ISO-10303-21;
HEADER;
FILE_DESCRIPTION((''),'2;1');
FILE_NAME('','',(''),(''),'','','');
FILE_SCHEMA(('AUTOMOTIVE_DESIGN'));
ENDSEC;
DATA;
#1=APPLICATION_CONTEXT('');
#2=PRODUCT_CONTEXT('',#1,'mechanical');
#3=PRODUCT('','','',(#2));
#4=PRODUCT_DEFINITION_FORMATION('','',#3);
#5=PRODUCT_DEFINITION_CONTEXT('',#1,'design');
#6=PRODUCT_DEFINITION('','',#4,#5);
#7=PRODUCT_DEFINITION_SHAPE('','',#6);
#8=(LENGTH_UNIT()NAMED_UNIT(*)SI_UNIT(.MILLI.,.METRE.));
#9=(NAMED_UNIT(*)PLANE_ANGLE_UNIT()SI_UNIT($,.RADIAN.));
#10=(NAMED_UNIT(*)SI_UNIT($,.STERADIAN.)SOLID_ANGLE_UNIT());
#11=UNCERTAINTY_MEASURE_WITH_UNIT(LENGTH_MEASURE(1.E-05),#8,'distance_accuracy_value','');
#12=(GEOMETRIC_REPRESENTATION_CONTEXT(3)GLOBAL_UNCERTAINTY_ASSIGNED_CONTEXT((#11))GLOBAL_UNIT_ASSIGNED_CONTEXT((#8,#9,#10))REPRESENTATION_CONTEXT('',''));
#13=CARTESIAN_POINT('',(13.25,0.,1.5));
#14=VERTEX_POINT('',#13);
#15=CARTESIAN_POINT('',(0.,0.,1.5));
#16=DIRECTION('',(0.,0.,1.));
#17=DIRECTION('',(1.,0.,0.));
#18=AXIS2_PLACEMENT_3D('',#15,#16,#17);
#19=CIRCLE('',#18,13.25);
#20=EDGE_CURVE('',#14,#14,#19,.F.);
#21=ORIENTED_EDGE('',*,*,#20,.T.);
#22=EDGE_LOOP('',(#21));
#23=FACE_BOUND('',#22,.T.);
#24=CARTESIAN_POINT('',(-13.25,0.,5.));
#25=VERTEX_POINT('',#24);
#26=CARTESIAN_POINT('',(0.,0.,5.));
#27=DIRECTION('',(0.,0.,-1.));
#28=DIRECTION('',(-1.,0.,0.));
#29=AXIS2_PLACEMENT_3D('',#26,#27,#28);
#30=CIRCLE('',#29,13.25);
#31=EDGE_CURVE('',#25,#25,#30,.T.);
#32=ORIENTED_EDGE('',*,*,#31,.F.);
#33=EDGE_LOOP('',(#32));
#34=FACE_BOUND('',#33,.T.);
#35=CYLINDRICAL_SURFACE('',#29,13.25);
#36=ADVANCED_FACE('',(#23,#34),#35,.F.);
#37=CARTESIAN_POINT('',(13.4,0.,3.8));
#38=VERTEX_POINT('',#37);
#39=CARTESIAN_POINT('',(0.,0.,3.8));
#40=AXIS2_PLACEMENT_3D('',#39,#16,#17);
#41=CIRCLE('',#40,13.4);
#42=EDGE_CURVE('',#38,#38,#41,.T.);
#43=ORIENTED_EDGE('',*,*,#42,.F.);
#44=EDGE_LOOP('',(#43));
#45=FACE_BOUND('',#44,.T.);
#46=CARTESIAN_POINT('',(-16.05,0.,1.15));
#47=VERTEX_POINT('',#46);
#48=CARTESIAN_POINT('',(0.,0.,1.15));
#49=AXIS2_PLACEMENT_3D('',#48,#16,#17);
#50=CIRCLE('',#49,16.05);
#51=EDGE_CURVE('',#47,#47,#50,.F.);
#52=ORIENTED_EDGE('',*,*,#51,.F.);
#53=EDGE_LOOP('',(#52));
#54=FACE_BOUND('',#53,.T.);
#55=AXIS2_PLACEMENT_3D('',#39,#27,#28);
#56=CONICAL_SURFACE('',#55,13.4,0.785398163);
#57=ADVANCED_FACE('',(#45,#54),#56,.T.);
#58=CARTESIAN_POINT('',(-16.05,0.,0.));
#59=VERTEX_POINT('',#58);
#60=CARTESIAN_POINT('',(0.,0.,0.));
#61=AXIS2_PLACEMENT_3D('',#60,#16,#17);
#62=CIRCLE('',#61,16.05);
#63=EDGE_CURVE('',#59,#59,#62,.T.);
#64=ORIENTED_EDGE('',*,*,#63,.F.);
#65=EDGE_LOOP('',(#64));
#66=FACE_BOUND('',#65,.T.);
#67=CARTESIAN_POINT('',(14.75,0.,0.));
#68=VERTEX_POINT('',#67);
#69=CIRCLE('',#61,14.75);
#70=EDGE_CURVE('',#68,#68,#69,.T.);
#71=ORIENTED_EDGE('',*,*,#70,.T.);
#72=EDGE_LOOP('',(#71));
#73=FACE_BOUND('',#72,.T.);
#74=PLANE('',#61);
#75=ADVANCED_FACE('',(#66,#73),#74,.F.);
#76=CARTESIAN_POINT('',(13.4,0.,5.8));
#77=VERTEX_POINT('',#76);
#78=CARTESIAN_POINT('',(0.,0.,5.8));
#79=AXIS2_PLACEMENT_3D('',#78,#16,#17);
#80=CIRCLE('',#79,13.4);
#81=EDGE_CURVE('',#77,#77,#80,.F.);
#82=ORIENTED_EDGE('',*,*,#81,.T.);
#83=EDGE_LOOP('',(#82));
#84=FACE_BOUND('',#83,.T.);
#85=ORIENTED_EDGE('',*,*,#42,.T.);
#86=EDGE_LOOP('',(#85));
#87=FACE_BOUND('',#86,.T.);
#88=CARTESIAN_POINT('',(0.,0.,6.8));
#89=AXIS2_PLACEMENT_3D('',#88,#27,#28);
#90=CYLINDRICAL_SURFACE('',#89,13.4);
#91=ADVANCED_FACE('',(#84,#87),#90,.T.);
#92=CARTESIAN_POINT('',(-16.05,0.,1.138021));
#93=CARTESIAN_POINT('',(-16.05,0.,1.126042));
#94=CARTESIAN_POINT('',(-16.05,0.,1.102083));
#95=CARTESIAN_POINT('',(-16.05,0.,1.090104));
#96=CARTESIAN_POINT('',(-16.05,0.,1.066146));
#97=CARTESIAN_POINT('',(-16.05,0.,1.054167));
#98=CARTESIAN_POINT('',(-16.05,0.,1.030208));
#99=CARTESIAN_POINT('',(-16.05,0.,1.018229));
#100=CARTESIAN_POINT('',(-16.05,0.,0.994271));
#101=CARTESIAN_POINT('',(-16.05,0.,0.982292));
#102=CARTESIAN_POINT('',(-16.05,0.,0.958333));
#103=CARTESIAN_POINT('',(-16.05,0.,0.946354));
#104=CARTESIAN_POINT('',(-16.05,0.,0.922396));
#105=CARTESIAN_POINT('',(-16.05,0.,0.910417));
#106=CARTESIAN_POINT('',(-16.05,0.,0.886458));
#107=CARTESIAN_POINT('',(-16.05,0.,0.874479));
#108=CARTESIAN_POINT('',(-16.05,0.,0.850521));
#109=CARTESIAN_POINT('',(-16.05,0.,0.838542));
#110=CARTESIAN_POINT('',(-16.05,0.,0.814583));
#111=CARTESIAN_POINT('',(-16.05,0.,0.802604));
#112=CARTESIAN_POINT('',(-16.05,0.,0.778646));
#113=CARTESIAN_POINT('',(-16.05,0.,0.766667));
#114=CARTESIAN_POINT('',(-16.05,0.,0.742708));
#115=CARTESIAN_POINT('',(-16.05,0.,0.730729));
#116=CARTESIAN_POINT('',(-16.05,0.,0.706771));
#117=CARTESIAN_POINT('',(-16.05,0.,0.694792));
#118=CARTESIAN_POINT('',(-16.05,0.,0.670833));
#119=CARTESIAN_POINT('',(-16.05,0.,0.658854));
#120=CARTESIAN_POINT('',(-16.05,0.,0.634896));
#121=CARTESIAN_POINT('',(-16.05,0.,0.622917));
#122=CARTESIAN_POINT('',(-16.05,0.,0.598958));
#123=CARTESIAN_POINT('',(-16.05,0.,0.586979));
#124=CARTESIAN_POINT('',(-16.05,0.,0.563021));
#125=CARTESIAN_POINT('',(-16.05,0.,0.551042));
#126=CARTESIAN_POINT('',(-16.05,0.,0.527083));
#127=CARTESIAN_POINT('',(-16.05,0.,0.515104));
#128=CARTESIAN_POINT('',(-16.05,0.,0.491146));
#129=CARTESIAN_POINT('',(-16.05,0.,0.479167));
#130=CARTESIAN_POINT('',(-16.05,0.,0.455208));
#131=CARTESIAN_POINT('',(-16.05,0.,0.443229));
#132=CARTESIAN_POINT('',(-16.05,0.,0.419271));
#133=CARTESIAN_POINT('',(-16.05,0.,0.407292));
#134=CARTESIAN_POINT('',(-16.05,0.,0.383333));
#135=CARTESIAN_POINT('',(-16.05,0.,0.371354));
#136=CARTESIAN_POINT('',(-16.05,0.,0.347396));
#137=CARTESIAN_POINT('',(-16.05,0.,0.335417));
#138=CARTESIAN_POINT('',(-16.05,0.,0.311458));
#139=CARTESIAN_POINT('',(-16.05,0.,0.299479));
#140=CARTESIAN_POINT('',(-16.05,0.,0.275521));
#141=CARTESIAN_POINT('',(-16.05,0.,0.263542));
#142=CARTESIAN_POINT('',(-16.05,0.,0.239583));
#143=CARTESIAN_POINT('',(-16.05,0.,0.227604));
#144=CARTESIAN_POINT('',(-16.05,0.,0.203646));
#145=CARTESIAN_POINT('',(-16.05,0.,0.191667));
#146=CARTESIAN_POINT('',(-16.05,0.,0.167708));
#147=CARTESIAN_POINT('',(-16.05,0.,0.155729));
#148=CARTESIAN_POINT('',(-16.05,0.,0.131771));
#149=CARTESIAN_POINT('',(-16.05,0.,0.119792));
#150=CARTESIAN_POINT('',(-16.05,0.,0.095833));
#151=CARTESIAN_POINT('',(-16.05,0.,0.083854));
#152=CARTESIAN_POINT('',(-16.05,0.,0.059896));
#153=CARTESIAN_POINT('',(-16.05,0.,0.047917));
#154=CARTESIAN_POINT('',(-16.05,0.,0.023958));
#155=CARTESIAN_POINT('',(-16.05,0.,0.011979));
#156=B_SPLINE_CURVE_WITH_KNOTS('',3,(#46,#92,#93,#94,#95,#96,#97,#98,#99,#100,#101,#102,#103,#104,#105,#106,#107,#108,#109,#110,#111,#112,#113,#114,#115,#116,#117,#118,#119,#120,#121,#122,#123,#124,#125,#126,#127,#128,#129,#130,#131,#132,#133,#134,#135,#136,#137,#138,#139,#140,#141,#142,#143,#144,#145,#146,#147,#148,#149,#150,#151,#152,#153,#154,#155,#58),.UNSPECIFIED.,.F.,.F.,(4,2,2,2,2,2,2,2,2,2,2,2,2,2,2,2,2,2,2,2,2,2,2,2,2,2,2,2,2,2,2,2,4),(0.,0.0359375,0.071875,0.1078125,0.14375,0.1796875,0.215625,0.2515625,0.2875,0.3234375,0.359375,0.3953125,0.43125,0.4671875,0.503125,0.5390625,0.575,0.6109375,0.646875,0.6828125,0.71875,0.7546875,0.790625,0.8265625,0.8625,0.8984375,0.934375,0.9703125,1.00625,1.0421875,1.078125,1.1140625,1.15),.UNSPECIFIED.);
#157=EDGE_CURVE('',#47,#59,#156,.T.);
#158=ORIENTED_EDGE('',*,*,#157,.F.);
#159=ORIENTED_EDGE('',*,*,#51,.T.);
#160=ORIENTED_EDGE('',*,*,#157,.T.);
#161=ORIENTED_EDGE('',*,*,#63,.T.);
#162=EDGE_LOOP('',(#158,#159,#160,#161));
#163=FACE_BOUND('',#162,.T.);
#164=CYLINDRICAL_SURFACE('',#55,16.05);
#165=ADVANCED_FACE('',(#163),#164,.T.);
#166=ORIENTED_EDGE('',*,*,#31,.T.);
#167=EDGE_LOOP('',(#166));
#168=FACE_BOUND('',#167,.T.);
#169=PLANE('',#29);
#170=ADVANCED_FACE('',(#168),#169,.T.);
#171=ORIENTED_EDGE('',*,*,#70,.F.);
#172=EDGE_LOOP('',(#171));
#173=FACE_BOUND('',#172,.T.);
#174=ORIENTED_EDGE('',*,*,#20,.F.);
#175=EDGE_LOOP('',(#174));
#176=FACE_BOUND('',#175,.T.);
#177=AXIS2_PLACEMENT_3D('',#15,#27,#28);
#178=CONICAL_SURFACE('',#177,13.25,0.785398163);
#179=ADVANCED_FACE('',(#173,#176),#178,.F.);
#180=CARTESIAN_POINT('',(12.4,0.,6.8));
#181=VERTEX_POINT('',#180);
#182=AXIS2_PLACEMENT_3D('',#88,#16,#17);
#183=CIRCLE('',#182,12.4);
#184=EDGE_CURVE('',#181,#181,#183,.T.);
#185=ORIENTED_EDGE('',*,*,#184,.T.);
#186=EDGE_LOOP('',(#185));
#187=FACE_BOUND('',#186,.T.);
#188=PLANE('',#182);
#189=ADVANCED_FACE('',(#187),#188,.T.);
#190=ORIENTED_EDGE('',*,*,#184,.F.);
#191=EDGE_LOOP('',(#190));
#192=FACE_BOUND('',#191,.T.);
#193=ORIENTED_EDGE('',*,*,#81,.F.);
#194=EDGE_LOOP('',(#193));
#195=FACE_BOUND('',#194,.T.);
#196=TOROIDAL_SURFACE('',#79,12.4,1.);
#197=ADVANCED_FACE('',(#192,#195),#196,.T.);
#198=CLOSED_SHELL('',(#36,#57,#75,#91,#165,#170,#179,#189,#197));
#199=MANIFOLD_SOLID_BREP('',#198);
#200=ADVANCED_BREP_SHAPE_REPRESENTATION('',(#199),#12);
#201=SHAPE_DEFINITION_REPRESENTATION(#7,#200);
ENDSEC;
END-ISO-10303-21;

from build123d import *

# Parameters (mm, degrees)
SCHIZZO1_R                   = 16.05
ESTRUSIONE_ESTRUSIONE1_DEPTH = 3.8
SCHIZZO2_R                   = 13.4
ESTRUSIONE_ESTRUSIONE2_DEPTH = 3
SMUSSO1_SIZE                 = 2.65
RACCORDO1_R                  = 1
SCHIZZO3_R                   = 13.25
TAGLIO_ESTRUSIONE1_DEPTH     = 5
SMUSSO2_SIZE                 = 1.5


with BuildPart() as part:
    # Schizzo1 → Estrusione-Estrusione1 (new body)
    with BuildSketch(Plane.XY):
        with Locations(Location((0, 0, 0), (0, 0, 180))):
            Circle(SCHIZZO1_R)
    extrude(amount=ESTRUSIONE_ESTRUSIONE1_DEPTH)

    # Schizzo2 → Estrusione-Estrusione2 (add)
    with BuildSketch(Plane.XY.offset(3.8)):
        Circle(SCHIZZO2_R)
    extrude(amount=ESTRUSIONE_ESTRUSIONE2_DEPTH)

    # Smusso1
    smusso1_edges = [part.edges().sort_by_distance(p)[0] for p in [
        (16.05, 0, 3.8),
    ]]
    chamfer(smusso1_edges, length=SMUSSO1_SIZE - 0.0001)  # a hair under: the kernel refuses the full size

    # Raccordo1
    raccordo1_edges = [part.edges().sort_by_distance(p)[0] for p in [
        (-13.4, 0, 6.8),
    ]]
    fillet(raccordo1_edges, radius=RACCORDO1_R)

    # Schizzo3 → Taglio-Estrusione1 (cut)
    with BuildSketch(Plane(origin=(0, 0, 0), x_dir=(-1, 0, 0), z_dir=(0, 0, -1))):
        Circle(SCHIZZO3_R)
    extrude(amount=-TAGLIO_ESTRUSIONE1_DEPTH, mode=Mode.SUBTRACT)

    # Smusso2
    smusso2_edges = [part.edges().sort_by_distance(p)[0] for p in [
        (13.25, 0, 0),
    ]]
    chamfer(smusso2_edges, length=SMUSSO2_SIZE)


solid = part.part
